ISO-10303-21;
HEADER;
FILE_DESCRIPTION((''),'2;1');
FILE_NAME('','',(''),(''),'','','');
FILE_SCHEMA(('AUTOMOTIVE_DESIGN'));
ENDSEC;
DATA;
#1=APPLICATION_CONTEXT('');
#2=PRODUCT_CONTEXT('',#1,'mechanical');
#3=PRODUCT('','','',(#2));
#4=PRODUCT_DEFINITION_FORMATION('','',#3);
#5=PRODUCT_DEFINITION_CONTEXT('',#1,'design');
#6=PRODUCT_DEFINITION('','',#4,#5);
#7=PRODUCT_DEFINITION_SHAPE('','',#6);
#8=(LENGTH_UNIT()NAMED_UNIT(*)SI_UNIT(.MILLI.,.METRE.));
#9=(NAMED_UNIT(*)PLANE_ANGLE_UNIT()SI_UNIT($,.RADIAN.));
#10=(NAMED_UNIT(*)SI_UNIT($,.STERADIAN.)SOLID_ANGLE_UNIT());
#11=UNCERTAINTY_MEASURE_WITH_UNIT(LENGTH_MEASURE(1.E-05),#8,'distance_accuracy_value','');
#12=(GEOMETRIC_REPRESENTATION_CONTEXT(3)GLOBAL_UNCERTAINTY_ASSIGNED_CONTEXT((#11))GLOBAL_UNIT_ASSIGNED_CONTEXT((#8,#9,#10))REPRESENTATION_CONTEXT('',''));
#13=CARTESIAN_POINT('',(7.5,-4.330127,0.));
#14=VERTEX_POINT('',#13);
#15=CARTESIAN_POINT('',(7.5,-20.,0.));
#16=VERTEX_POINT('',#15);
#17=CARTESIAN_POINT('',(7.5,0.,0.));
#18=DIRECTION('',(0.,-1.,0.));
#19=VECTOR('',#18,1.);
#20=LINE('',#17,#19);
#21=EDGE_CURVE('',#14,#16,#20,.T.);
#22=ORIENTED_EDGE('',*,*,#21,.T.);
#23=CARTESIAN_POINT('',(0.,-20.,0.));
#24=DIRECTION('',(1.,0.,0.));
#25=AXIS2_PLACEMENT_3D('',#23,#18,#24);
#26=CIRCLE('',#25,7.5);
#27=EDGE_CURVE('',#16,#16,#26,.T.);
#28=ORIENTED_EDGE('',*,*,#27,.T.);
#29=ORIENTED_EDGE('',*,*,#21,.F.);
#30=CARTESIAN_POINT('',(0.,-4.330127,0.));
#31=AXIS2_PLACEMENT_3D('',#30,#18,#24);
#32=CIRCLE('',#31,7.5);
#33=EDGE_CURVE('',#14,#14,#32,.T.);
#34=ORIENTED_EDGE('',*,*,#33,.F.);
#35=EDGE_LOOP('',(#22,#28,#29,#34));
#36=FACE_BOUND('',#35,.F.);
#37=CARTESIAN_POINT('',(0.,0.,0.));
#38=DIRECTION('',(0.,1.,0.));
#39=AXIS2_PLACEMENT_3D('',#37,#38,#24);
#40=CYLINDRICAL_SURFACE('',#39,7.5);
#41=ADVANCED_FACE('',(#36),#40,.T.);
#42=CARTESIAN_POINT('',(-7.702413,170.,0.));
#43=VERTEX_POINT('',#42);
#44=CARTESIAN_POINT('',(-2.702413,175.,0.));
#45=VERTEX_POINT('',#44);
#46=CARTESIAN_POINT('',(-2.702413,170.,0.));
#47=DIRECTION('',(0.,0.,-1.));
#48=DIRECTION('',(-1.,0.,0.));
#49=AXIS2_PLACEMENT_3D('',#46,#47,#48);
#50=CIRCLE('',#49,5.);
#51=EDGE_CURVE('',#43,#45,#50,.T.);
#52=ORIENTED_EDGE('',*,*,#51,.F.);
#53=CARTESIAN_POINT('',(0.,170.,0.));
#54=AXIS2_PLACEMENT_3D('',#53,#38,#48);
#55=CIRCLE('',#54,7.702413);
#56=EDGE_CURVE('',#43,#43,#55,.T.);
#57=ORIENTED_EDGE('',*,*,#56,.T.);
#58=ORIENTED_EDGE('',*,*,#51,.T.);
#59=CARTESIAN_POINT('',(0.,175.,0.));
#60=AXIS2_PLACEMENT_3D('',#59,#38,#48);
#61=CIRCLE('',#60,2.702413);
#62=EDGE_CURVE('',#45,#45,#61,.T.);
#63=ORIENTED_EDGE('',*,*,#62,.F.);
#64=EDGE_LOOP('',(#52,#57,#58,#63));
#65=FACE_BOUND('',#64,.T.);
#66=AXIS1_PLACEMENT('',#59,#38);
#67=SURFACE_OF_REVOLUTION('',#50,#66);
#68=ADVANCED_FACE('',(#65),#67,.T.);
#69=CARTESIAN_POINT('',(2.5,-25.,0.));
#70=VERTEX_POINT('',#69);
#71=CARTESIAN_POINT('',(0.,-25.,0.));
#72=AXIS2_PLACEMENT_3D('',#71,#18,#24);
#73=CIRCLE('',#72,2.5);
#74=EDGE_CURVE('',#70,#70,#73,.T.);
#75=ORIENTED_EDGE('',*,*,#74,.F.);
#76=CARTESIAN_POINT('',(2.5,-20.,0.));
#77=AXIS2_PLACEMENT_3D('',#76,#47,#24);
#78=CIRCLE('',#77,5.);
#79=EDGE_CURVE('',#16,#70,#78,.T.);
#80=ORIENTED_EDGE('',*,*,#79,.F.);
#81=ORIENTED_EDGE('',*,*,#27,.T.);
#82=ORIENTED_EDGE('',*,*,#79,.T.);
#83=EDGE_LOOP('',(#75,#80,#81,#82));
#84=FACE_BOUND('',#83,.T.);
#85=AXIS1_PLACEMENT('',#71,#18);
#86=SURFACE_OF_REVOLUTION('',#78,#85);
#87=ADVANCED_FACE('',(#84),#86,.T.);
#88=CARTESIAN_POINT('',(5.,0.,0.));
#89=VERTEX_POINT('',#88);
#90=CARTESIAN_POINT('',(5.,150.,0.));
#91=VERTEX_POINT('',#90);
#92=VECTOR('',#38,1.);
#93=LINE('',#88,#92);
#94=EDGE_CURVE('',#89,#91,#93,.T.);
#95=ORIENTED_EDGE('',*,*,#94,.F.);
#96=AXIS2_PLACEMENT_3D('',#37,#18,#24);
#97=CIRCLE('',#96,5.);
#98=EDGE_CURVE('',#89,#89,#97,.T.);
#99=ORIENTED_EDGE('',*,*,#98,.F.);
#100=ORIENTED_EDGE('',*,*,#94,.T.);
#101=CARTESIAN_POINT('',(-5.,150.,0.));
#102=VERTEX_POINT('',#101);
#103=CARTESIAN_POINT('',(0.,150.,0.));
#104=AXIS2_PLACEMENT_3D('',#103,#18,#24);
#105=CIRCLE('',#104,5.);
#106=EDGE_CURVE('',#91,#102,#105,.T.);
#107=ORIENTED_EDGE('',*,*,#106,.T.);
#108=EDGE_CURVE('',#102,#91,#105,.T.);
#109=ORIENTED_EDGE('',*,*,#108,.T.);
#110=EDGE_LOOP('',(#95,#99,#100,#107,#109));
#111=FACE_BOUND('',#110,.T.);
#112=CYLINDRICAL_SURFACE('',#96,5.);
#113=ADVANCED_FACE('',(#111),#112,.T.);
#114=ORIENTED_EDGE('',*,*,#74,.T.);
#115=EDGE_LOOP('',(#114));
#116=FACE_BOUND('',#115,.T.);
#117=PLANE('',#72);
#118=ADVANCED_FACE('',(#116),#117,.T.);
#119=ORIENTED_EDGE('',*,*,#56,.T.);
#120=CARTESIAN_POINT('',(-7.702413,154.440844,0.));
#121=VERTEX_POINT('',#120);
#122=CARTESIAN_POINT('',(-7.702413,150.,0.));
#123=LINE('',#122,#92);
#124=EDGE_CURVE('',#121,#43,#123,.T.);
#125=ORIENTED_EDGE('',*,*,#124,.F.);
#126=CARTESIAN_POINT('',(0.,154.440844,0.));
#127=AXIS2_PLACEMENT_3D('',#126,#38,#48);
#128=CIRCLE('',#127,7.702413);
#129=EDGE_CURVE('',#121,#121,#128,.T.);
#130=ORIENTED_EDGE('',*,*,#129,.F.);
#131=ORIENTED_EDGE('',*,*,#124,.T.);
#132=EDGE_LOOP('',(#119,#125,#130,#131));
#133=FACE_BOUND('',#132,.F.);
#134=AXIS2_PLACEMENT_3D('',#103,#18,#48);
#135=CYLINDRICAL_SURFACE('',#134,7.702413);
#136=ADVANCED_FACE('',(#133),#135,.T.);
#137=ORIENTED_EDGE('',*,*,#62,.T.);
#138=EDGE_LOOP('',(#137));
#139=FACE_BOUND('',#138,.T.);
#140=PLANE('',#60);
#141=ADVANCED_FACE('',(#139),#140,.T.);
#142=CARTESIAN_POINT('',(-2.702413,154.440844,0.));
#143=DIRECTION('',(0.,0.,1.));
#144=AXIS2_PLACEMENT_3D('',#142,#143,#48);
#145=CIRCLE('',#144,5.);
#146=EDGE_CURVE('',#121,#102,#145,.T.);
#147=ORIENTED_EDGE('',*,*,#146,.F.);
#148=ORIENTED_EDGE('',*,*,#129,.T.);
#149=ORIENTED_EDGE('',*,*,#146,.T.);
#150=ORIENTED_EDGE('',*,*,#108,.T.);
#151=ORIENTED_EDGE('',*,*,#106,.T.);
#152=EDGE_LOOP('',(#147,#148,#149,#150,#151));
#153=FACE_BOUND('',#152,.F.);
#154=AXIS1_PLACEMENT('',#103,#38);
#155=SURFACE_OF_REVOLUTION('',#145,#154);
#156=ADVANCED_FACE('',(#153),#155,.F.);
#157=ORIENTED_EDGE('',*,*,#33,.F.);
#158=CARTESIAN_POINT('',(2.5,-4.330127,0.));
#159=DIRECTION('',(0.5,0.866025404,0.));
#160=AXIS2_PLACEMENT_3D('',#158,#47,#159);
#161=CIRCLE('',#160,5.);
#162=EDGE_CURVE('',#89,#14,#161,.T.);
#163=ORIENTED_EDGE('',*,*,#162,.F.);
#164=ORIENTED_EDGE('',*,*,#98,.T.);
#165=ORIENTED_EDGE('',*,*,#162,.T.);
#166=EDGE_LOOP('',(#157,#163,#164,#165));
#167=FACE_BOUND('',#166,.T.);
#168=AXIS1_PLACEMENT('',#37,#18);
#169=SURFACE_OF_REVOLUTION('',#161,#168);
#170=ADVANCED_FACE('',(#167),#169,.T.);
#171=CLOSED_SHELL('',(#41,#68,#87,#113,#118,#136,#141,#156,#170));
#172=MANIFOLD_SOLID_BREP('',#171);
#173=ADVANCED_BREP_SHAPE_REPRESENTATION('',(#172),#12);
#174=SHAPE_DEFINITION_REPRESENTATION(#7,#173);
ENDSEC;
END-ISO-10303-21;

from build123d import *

# Parameters (mm, degrees)
F0_R      = 5
F1_DEPTH  = 150
F1_FACE_R = 5
F0_R_2    = 7.5
F2_DEPTH  = 25
F3_R      = 7.7024133884
F3_R_2    = 5
F4_DEPTH  = 25


# Not quite as in the source:
# - a fillet or chamfer that OpenCascade refuses, or shapes differently, is made with other operations: its cross-section is extruded or revolved along the edge and cut away or added


with BuildPart() as f1:
    # F0 (on Front) → F1 (new body)
    with BuildSketch(Plane.XZ):
        Circle(F0_R)
    extrude(amount=-F1_DEPTH)

    # F1_face (on face) + F0 (on Front) → F2 (join)
    with BuildSketch(Plane.XZ):
        Circle(F1_FACE_R)
    with BuildSketch(Plane.XZ):
        Circle(F0_R_2)
        Circle(F0_R, mode=Mode.SUBTRACT)
    extrude(amount=F2_DEPTH)

    # F3 (on face) → F4 (join)
    with BuildSketch(Plane(origin=(0, 150, 0), x_dir=(-1, 0, 0), z_dir=(0, 1, 0))):
        Circle(F3_R)
        Circle(F3_R_2, mode=Mode.SUBTRACT)
        Circle(F3_R_2)
    extrude(amount=F4_DEPTH)

    # F5: fillet of radius 5 on 4 edges, made by hand

    # F5_s1 → F5_t2 (revolve, cut)
    with BuildSketch(Plane.XY):
        with BuildLine():
            ThreePointArc((7.5, -20), (6.0355339059, -23.5355339059), (2.5, -25))
            Line((2.5, -25), (7.5, -25))
            Line((7.5, -25), (7.5, -20))
        make_face()
    revolve(axis=Axis((0, -25, 0), (0, -1, 0)), mode=Mode.SUBTRACT)

    # F5_s3 → F5_t4 (revolve, cut)
    with BuildSketch(Plane.XY):
        with BuildLine():
            ThreePointArc((5, 0), (6.8301270189, -1.8301270189), (7.5, -4.3301270189))
            Line((7.5, -4.3301270189), (7.5, 0))
            Line((7.5, 0), (5, 0))
        make_face()
    revolve(axis=Axis((0, 0, 0), (0, -1, 0)), mode=Mode.SUBTRACT)

    # F5_s5 → F5_t6 (revolve, cut)
    with BuildSketch(Plane.XY):
        with BuildLine():
            ThreePointArc((-7.7024133884, 170), (-6.2379472943, 173.5355339059), (-2.7024133884, 175))
            Line((-2.7024133884, 175), (-7.7024133884, 175))
            Line((-7.7024133884, 175), (-7.7024133884, 170))
        make_face()
    revolve(axis=Axis((0, 175, 0), (0, 1, 0)), mode=Mode.SUBTRACT)

    # F5_s7 → F5_t8 (revolve, cut)
    with BuildSketch(Plane.XY):
        with BuildLine():
            ThreePointArc((-7.7024133884, 154.4408440371), (-6.9737090383, 151.8416069431), (-5, 150))
            Line((-5, 150), (-7.7024133884, 150))
            Line((-7.7024133884, 150), (-7.7024133884, 154.4408440371))
        make_face()
    revolve(axis=Axis((0, 150, 0), (0, 1, 0)), mode=Mode.SUBTRACT)


solid = f1.part
